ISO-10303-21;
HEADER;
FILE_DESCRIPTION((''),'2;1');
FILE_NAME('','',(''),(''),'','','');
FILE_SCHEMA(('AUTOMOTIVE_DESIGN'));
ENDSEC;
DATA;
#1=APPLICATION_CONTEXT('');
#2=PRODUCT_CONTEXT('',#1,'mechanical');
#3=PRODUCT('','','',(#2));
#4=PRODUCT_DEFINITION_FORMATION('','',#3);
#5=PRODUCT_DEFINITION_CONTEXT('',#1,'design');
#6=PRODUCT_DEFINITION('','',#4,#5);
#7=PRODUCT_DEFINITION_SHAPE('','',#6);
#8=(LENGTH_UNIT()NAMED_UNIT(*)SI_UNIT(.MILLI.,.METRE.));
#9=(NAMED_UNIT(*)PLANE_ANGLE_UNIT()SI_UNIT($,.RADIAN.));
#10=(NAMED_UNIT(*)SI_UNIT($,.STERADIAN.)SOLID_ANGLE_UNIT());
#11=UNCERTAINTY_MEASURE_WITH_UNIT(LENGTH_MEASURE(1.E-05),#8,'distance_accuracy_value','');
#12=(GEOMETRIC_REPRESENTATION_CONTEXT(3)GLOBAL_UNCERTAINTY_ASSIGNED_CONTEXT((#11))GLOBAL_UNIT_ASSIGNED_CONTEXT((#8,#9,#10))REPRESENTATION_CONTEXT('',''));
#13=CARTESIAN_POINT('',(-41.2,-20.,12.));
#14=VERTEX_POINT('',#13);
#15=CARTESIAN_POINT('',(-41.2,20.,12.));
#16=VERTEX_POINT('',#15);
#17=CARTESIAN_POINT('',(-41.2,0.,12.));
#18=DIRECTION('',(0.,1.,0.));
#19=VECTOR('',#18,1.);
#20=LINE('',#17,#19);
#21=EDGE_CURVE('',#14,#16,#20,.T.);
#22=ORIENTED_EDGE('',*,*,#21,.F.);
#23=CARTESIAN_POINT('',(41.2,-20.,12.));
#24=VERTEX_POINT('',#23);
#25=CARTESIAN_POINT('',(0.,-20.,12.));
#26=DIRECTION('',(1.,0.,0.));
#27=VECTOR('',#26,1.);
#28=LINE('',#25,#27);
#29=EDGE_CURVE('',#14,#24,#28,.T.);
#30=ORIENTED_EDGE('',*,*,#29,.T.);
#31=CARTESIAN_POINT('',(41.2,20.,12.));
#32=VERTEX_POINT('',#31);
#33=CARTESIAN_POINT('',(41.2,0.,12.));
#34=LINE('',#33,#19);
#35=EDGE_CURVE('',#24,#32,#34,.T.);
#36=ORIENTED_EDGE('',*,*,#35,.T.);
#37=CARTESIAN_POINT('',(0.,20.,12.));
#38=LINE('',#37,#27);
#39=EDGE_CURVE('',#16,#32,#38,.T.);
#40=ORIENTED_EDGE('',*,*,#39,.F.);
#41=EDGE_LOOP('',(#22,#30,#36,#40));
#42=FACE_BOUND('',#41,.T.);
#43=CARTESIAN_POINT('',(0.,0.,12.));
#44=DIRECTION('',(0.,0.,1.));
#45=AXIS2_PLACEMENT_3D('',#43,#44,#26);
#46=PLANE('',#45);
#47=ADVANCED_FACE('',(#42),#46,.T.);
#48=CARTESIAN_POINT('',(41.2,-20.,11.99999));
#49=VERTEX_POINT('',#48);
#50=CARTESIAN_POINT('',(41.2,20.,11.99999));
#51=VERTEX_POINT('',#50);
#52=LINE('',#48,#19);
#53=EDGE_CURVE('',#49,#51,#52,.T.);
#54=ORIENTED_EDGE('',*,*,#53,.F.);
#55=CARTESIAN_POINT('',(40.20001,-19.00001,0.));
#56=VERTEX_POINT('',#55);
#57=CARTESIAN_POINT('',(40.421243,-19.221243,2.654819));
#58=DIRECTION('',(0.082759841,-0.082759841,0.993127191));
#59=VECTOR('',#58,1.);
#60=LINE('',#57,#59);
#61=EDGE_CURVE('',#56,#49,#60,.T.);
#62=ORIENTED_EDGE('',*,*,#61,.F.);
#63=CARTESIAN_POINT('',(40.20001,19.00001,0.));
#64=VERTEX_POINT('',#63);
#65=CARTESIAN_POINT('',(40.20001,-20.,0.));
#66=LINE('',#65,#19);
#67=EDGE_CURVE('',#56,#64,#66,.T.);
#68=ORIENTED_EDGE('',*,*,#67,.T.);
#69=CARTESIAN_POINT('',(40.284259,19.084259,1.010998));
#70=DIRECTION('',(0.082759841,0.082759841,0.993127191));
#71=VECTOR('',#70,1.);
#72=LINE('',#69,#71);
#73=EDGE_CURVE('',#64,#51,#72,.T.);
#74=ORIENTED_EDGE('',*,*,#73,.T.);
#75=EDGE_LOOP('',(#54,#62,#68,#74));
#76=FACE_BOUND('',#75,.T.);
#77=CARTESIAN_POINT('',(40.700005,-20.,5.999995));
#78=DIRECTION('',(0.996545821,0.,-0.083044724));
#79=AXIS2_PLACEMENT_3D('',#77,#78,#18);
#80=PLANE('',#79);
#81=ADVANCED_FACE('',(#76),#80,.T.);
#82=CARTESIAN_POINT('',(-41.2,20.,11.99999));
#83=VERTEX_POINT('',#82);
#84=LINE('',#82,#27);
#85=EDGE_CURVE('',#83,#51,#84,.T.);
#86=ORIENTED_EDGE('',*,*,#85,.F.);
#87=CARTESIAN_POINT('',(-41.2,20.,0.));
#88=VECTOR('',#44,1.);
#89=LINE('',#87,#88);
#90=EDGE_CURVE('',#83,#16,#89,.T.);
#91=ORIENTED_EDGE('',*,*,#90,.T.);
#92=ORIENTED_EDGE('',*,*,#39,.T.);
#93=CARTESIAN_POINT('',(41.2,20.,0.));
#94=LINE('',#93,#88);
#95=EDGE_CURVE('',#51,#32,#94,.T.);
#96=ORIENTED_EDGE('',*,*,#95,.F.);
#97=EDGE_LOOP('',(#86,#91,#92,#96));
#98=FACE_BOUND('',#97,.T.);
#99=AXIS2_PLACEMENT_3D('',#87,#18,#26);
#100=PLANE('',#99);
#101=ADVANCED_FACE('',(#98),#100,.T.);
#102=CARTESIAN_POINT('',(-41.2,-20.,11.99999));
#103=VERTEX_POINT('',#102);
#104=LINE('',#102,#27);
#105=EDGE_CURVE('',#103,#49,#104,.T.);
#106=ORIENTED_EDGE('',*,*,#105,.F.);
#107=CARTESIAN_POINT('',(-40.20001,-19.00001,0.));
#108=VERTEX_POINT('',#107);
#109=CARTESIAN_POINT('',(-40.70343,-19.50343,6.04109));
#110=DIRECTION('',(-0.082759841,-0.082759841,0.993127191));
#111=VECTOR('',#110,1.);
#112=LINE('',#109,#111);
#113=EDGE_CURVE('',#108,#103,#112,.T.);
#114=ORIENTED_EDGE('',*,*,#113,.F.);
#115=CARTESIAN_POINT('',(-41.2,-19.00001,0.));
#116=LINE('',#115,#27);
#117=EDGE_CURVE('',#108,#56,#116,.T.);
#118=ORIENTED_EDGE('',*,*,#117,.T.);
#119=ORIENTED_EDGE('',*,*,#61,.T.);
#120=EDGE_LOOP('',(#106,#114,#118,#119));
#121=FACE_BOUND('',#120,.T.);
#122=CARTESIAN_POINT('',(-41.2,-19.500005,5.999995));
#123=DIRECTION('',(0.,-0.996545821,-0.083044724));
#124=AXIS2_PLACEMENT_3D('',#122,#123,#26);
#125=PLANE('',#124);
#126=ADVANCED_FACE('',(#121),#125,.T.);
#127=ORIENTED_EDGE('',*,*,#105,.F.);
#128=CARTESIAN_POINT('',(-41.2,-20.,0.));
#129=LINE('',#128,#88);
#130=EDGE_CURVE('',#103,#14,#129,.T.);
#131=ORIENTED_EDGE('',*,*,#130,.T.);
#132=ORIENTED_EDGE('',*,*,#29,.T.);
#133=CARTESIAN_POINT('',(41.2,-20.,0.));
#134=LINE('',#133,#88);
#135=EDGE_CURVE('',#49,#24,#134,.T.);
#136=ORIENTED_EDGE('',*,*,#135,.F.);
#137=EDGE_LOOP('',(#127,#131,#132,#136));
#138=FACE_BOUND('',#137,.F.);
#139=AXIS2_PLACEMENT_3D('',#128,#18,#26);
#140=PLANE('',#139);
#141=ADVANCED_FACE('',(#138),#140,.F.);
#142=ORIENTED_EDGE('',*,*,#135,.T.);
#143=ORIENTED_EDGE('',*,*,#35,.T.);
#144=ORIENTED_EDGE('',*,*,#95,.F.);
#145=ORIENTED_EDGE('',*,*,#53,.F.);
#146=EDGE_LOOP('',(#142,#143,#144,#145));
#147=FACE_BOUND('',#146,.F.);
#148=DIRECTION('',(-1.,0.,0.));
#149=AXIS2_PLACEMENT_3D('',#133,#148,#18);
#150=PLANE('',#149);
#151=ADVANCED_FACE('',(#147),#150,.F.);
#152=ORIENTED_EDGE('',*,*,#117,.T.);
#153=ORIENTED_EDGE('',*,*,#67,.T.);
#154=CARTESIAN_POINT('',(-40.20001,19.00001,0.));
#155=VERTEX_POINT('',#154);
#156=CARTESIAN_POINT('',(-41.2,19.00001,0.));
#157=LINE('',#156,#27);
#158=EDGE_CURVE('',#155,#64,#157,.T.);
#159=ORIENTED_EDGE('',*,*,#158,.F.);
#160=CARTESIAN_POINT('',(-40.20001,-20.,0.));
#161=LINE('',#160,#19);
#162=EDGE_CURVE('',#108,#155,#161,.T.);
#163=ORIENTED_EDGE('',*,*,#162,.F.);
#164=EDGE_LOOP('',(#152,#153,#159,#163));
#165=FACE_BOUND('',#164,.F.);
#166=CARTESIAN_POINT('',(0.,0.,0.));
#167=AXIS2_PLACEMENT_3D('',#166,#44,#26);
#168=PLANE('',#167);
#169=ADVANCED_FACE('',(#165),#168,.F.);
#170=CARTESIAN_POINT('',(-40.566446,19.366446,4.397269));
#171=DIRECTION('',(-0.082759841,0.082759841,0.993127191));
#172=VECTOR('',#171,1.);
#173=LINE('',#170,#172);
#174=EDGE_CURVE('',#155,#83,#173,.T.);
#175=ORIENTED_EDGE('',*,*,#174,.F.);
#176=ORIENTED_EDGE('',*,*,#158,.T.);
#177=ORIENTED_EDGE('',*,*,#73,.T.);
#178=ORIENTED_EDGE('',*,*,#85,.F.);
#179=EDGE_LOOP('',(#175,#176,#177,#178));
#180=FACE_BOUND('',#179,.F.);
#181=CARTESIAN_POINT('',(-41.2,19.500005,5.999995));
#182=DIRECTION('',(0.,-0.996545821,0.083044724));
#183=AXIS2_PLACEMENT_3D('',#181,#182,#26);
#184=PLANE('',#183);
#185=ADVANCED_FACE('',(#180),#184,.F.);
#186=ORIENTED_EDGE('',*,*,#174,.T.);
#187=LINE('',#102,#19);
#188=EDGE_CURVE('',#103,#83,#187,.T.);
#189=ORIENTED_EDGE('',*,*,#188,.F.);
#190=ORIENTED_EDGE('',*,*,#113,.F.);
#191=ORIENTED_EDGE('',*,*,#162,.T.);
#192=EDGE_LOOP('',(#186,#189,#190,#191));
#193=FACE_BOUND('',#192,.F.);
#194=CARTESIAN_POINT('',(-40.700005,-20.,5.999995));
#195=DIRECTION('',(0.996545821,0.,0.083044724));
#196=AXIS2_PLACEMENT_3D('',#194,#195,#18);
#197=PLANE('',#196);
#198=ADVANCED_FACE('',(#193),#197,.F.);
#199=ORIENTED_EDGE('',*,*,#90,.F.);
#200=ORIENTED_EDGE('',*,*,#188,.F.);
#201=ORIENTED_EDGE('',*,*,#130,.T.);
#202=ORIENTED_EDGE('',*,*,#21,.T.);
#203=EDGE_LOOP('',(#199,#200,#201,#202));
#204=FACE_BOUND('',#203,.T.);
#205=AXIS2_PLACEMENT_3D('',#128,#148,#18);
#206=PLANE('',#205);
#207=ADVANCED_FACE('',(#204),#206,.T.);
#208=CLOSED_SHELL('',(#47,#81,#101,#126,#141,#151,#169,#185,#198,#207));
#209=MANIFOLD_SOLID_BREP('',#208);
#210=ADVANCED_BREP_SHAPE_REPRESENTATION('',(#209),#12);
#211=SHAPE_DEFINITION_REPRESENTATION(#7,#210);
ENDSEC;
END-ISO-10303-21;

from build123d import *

# Parameters (mm, degrees)
F0_W     = 82.4
F0_H     = 40
F1_DEPTH = 12
F2_SIZE2 = 11.99999
F2_SIZE  = 0.99999


# Not quite as in the source:
# - a fillet or chamfer is up to 0.001 mm smaller than in the source, because OpenCascade refuses the exact size


with BuildPart() as f1:
    # F0 (on Top) → F1 (new body)
    with BuildSketch(Plane.XY):
        Rectangle(F0_W, F0_H)
    extrude(amount=F1_DEPTH)

    # F2 (size 1 and 12 in the source; OpenCascade refuses exactly that, so slightly less here)
    f2_edges = [f1.edges().sort_by_distance(p)[0] for p in [
        (0, -20, 0),
        (41.2, 0, 0),
        (0, 20, 0),
        (-41.2, 0, 0),
    ]]
    f2_side = f1.faces().sort_by_distance((0, 0, 0))[0]
    chamfer(f2_edges, length=F2_SIZE, length2=F2_SIZE2, reference=f2_side)


solid = f1.part
